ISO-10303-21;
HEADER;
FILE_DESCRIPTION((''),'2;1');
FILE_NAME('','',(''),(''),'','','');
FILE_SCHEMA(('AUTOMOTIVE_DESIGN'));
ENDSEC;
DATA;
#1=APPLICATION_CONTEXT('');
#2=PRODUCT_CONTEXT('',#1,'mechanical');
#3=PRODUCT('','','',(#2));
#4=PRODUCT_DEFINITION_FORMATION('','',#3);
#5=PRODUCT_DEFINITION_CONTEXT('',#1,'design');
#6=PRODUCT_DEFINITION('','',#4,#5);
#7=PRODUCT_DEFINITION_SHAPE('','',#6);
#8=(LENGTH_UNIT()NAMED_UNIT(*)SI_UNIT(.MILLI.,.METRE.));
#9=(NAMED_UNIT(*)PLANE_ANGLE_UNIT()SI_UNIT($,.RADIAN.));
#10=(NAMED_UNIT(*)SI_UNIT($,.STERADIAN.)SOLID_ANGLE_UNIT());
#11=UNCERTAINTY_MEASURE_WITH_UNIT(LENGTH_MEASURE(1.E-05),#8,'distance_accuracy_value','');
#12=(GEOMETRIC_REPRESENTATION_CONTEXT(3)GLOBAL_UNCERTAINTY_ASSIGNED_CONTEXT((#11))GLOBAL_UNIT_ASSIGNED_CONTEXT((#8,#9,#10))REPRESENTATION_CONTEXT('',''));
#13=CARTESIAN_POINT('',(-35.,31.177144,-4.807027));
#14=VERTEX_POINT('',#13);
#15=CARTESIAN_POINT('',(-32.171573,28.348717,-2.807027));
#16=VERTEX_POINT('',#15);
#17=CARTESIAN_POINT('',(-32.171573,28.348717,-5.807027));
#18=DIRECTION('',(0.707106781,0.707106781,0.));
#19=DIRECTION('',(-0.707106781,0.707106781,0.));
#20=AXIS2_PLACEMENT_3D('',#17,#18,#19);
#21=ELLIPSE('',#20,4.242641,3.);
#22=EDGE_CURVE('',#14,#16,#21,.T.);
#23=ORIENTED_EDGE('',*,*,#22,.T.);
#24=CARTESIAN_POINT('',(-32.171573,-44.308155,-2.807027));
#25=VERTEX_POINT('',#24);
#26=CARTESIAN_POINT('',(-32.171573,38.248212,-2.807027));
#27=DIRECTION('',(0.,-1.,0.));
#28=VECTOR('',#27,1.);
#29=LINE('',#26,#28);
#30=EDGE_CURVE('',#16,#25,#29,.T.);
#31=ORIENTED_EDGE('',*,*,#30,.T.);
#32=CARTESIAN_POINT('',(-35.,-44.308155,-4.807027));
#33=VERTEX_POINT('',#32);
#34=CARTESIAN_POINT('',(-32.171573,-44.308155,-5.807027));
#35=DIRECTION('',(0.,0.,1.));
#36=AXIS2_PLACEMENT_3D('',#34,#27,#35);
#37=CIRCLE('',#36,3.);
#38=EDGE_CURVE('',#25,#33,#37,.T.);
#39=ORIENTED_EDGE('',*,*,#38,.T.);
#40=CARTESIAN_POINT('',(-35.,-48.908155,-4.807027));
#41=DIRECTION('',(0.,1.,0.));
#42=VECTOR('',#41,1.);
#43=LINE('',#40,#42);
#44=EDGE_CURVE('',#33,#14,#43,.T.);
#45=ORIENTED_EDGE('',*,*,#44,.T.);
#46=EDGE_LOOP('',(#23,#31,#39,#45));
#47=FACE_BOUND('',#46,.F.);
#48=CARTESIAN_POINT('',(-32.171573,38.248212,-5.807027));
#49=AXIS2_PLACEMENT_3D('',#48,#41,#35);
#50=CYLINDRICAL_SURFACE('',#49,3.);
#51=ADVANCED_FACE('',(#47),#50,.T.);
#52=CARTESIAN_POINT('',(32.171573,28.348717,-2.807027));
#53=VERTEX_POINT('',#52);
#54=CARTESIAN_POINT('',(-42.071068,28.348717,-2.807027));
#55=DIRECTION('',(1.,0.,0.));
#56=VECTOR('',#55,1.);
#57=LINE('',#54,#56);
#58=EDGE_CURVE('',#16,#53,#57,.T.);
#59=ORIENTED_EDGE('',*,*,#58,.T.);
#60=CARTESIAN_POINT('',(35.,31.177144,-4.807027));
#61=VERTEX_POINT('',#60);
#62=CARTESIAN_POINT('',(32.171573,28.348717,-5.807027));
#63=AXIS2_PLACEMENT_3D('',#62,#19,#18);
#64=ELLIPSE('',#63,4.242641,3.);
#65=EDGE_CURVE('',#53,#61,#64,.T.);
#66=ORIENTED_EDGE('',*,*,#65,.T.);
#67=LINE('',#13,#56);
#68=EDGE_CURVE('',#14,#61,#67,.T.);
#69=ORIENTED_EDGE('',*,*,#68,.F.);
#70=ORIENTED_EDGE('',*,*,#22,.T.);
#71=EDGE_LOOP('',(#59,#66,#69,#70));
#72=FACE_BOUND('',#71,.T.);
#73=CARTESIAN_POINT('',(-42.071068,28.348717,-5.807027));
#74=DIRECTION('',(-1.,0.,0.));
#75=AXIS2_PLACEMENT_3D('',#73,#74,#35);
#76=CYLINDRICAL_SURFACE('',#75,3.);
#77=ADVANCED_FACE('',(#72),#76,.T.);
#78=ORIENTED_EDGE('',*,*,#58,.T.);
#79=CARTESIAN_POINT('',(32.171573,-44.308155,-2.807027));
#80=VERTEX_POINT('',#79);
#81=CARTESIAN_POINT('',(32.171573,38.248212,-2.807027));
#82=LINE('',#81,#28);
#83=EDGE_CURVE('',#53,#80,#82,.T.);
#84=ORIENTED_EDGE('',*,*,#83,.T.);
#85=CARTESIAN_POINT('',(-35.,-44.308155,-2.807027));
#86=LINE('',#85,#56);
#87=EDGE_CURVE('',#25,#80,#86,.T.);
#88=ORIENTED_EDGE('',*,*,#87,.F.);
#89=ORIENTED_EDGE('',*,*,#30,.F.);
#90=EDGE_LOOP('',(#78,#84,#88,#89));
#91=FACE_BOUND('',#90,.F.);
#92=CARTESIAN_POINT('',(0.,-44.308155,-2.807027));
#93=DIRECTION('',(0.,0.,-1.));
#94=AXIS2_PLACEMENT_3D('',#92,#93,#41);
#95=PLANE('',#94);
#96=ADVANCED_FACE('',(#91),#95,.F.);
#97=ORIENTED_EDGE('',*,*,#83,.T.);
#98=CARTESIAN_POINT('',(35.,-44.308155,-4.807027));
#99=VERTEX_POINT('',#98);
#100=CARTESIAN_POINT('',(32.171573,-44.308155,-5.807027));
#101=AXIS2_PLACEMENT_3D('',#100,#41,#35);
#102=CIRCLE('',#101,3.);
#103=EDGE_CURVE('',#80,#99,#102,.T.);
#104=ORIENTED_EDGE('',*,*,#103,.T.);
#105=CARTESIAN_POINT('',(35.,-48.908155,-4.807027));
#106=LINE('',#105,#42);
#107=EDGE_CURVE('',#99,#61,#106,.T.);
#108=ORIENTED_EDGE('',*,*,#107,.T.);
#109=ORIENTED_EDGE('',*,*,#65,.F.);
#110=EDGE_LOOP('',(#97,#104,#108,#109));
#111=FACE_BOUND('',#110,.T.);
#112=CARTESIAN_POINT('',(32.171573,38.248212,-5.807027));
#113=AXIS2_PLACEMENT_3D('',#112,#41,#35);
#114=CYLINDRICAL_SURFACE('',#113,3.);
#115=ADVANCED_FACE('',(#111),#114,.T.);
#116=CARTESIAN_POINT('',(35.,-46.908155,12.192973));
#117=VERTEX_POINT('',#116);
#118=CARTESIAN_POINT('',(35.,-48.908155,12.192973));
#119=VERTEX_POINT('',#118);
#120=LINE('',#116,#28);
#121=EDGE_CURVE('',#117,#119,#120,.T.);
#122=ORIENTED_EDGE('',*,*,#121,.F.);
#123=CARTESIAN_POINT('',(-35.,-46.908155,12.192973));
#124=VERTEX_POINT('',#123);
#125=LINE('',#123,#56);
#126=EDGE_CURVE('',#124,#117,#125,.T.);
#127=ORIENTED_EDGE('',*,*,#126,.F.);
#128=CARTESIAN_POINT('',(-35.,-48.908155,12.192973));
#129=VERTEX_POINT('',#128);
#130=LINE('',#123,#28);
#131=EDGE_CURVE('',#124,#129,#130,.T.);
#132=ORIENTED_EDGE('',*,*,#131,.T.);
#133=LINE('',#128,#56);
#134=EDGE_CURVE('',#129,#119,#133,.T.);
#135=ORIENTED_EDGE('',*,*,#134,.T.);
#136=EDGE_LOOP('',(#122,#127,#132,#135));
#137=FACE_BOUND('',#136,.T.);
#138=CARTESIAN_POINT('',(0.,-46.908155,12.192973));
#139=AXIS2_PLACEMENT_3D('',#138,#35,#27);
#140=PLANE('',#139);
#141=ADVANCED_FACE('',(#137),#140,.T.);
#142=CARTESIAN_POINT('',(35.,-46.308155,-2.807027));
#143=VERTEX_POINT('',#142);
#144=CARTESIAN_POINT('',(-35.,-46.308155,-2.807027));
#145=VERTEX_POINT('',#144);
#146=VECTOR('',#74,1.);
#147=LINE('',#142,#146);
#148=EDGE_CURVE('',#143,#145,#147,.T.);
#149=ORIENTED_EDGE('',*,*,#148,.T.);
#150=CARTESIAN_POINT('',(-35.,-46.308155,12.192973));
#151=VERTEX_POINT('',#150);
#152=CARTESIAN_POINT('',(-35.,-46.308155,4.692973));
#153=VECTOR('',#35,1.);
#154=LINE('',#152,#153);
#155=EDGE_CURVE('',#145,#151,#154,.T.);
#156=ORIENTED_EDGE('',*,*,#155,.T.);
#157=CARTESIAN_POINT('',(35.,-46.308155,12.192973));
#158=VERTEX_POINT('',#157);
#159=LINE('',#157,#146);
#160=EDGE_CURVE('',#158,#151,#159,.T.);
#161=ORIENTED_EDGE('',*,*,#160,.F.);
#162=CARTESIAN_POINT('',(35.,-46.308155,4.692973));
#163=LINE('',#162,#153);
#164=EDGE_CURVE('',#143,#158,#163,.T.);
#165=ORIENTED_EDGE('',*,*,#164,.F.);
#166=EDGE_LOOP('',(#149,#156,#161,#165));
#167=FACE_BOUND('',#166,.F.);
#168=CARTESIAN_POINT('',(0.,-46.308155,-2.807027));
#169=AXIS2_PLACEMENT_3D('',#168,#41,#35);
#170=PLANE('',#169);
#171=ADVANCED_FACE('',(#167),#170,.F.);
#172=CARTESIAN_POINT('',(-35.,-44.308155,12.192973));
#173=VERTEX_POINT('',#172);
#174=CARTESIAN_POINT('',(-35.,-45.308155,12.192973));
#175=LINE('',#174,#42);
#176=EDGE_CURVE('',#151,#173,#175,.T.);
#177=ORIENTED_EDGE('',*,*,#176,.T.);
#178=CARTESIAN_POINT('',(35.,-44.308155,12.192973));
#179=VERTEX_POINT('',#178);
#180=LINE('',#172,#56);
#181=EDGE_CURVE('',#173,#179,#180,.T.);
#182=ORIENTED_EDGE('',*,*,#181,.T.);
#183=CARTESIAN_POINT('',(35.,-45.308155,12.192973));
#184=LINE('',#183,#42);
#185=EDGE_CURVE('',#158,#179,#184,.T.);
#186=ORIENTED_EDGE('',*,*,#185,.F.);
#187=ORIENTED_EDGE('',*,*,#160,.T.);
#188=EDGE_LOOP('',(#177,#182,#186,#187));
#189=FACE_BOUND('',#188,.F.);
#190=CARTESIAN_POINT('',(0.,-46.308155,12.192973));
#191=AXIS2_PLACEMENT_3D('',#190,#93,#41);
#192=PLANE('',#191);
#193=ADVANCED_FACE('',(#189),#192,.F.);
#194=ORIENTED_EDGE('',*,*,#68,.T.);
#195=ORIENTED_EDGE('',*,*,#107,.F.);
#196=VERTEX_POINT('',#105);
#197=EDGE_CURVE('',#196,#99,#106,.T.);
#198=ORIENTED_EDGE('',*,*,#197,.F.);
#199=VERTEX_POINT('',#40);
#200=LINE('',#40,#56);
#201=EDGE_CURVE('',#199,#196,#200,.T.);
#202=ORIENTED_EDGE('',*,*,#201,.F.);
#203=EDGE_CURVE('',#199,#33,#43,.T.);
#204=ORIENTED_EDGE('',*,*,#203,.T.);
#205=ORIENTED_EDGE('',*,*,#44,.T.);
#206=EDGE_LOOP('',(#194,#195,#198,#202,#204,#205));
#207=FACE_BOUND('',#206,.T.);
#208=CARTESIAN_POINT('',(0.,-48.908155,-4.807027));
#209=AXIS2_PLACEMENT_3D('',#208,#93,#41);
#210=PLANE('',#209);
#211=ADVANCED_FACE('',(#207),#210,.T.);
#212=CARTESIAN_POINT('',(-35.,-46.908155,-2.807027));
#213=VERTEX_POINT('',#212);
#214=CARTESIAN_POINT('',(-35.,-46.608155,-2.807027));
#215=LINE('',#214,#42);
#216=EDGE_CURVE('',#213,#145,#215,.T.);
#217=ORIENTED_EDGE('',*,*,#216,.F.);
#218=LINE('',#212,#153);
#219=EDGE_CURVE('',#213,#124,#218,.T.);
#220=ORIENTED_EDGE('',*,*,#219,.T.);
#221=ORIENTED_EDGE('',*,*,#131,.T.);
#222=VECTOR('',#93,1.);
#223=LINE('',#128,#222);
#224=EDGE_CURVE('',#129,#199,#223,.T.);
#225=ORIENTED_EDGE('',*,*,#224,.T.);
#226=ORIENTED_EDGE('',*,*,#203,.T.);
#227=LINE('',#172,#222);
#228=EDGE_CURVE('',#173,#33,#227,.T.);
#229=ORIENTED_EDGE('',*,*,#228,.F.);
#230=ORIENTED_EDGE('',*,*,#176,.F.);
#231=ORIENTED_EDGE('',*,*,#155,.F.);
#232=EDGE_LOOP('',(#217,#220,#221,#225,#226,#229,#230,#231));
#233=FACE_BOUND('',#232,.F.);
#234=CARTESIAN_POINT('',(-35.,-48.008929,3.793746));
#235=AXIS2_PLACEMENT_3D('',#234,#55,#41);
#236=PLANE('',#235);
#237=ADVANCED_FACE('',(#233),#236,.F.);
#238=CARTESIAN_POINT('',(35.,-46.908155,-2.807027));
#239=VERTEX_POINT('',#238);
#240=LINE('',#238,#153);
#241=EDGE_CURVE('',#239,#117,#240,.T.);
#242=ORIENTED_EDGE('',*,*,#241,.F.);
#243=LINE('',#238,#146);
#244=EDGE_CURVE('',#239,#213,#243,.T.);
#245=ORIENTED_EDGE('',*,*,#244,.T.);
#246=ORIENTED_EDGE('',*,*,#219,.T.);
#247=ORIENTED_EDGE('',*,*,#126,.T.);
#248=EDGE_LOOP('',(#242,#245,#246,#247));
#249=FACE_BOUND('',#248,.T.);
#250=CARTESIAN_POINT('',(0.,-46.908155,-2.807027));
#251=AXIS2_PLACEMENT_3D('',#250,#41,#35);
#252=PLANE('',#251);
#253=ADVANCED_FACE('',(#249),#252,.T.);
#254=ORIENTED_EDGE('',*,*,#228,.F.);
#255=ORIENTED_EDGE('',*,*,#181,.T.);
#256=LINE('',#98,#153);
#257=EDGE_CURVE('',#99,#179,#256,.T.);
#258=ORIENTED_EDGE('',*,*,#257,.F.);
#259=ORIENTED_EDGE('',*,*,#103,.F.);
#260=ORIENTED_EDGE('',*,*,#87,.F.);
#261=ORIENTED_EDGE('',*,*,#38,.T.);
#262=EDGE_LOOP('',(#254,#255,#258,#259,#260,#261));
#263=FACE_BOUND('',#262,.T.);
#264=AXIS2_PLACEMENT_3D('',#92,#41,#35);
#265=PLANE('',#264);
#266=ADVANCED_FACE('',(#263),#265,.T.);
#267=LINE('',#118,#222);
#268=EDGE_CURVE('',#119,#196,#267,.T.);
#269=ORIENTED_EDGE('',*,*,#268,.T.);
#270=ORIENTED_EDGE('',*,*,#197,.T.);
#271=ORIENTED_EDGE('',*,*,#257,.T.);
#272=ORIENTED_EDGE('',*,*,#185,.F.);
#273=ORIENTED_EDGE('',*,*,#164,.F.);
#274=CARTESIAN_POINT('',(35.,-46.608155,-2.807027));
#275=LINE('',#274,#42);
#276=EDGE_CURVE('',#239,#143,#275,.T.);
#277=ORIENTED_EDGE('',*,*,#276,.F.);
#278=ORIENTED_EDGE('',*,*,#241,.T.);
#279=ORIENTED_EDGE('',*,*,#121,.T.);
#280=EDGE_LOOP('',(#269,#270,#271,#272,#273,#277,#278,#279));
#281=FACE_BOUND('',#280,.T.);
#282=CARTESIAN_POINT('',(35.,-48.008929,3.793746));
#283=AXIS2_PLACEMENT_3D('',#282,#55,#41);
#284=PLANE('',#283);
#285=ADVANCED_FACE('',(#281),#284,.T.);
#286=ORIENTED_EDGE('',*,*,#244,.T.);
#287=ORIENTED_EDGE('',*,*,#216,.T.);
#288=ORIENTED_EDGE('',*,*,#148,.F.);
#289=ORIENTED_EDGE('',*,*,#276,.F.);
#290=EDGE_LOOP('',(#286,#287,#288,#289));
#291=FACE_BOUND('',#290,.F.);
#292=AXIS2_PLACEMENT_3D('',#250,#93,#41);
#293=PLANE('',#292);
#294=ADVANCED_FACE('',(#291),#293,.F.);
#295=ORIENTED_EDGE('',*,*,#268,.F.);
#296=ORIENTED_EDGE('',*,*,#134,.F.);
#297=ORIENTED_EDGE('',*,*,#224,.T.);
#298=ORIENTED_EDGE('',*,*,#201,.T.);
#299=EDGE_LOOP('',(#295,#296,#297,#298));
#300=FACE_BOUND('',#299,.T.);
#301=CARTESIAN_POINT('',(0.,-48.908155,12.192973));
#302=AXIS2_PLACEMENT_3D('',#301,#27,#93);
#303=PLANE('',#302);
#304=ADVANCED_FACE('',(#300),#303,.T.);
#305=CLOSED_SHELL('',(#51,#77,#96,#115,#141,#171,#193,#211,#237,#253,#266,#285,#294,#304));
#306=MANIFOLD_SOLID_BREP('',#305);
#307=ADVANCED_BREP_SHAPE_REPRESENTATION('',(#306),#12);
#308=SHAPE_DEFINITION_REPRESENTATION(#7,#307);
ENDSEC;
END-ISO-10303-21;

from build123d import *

# Parameters (mm, degrees)
F0_W        = 1.9147001281
F0_H        = 2
F0_W_2      = 0.6
F0_W_3      = 2
F0_H_2      = 15
F0_W_4      = 75.4852998719
F1_DEPTH    = 35
F2_T1_DEPTH = 82.5563676837
F2_T3_DEPTH = 84.1421356237


# Not quite as in the source:
# - a fillet or chamfer that OpenCascade refuses, or shapes differently, is made with other operations: its cross-section is extruded or revolved along the edge and cut away or added


with BuildPart() as f1:
    # F0 (on Right) → F1 (new body, symmetric)
    with BuildSketch(Plane.YZ):
        Polygon((-48.8228555396, -4.8070274784), (-48.8228555396, -2.8070274784), (-46.9081554115, -2.8070274784), (-46.9081554115, 12.1929725216), (-48.9081554115, 12.1929725216), (-48.9081554115, -4.8070274784), align=None)
        with Locations((-47.8655054756, -3.8070274784)):
            Rectangle(F0_W, F0_H)
        with Locations((-46.6081554115, -3.8070274784)):
            Rectangle(F0_W_2, F0_H)
        with Locations((-45.3081554115, 4.6929725216)):
            Rectangle(F0_W_3, F0_H_2)
        with Locations((-45.3081554115, -3.8070274784)):
            Rectangle(F0_W_3, F0_H)
        with Locations((-6.5655054756, -3.8070274784)):
            Rectangle(F0_W_4, F0_H)
    extrude(amount=F1_DEPTH, both=True)

    # F2: fillet of radius 3 on 3 edges, made by hand

    # F2_s2 → F2_t1 (cut)
    with BuildSketch(Plane.XZ.offset(-38.2482122722)):
        with BuildLine():
            ThreePointArc((32.1715728753, -2.8070274784), (33.9036236828, -3.3575377356), (35, -4.8070274784))
            Line((35, -4.8070274784), (35, -2.8070274784))
            Line((35, -2.8070274784), (32.1715728753, -2.8070274784))
        make_face()
        with BuildLine():
            ThreePointArc((-32.1715728753, -2.8070274784), (-33.9036236828, -3.3575377356), (-35, -4.8070274784))
            Line((-35, -4.8070274784), (-35, -2.8070274784))
            Line((-35, -2.8070274784), (-32.1715728753, -2.8070274784))
        make_face()
    extrude(amount=F2_T1_DEPTH, mode=Mode.SUBTRACT)

    # F2_s4 → F2_t3 (cut)
    with BuildSketch(Plane.YZ.offset(-42.0710678119)):
        with BuildLine():
            ThreePointArc((28.3487173356, -2.8070274784), (30.0807681432, -3.3575377356), (31.1771444604, -4.8070274784))
            Line((31.1771444604, -4.8070274784), (31.1771444604, -2.8070274784))
            Line((31.1771444604, -2.8070274784), (28.3487173356, -2.8070274784))
        make_face()
    extrude(amount=F2_T3_DEPTH, mode=Mode.SUBTRACT)


solid = f1.part
